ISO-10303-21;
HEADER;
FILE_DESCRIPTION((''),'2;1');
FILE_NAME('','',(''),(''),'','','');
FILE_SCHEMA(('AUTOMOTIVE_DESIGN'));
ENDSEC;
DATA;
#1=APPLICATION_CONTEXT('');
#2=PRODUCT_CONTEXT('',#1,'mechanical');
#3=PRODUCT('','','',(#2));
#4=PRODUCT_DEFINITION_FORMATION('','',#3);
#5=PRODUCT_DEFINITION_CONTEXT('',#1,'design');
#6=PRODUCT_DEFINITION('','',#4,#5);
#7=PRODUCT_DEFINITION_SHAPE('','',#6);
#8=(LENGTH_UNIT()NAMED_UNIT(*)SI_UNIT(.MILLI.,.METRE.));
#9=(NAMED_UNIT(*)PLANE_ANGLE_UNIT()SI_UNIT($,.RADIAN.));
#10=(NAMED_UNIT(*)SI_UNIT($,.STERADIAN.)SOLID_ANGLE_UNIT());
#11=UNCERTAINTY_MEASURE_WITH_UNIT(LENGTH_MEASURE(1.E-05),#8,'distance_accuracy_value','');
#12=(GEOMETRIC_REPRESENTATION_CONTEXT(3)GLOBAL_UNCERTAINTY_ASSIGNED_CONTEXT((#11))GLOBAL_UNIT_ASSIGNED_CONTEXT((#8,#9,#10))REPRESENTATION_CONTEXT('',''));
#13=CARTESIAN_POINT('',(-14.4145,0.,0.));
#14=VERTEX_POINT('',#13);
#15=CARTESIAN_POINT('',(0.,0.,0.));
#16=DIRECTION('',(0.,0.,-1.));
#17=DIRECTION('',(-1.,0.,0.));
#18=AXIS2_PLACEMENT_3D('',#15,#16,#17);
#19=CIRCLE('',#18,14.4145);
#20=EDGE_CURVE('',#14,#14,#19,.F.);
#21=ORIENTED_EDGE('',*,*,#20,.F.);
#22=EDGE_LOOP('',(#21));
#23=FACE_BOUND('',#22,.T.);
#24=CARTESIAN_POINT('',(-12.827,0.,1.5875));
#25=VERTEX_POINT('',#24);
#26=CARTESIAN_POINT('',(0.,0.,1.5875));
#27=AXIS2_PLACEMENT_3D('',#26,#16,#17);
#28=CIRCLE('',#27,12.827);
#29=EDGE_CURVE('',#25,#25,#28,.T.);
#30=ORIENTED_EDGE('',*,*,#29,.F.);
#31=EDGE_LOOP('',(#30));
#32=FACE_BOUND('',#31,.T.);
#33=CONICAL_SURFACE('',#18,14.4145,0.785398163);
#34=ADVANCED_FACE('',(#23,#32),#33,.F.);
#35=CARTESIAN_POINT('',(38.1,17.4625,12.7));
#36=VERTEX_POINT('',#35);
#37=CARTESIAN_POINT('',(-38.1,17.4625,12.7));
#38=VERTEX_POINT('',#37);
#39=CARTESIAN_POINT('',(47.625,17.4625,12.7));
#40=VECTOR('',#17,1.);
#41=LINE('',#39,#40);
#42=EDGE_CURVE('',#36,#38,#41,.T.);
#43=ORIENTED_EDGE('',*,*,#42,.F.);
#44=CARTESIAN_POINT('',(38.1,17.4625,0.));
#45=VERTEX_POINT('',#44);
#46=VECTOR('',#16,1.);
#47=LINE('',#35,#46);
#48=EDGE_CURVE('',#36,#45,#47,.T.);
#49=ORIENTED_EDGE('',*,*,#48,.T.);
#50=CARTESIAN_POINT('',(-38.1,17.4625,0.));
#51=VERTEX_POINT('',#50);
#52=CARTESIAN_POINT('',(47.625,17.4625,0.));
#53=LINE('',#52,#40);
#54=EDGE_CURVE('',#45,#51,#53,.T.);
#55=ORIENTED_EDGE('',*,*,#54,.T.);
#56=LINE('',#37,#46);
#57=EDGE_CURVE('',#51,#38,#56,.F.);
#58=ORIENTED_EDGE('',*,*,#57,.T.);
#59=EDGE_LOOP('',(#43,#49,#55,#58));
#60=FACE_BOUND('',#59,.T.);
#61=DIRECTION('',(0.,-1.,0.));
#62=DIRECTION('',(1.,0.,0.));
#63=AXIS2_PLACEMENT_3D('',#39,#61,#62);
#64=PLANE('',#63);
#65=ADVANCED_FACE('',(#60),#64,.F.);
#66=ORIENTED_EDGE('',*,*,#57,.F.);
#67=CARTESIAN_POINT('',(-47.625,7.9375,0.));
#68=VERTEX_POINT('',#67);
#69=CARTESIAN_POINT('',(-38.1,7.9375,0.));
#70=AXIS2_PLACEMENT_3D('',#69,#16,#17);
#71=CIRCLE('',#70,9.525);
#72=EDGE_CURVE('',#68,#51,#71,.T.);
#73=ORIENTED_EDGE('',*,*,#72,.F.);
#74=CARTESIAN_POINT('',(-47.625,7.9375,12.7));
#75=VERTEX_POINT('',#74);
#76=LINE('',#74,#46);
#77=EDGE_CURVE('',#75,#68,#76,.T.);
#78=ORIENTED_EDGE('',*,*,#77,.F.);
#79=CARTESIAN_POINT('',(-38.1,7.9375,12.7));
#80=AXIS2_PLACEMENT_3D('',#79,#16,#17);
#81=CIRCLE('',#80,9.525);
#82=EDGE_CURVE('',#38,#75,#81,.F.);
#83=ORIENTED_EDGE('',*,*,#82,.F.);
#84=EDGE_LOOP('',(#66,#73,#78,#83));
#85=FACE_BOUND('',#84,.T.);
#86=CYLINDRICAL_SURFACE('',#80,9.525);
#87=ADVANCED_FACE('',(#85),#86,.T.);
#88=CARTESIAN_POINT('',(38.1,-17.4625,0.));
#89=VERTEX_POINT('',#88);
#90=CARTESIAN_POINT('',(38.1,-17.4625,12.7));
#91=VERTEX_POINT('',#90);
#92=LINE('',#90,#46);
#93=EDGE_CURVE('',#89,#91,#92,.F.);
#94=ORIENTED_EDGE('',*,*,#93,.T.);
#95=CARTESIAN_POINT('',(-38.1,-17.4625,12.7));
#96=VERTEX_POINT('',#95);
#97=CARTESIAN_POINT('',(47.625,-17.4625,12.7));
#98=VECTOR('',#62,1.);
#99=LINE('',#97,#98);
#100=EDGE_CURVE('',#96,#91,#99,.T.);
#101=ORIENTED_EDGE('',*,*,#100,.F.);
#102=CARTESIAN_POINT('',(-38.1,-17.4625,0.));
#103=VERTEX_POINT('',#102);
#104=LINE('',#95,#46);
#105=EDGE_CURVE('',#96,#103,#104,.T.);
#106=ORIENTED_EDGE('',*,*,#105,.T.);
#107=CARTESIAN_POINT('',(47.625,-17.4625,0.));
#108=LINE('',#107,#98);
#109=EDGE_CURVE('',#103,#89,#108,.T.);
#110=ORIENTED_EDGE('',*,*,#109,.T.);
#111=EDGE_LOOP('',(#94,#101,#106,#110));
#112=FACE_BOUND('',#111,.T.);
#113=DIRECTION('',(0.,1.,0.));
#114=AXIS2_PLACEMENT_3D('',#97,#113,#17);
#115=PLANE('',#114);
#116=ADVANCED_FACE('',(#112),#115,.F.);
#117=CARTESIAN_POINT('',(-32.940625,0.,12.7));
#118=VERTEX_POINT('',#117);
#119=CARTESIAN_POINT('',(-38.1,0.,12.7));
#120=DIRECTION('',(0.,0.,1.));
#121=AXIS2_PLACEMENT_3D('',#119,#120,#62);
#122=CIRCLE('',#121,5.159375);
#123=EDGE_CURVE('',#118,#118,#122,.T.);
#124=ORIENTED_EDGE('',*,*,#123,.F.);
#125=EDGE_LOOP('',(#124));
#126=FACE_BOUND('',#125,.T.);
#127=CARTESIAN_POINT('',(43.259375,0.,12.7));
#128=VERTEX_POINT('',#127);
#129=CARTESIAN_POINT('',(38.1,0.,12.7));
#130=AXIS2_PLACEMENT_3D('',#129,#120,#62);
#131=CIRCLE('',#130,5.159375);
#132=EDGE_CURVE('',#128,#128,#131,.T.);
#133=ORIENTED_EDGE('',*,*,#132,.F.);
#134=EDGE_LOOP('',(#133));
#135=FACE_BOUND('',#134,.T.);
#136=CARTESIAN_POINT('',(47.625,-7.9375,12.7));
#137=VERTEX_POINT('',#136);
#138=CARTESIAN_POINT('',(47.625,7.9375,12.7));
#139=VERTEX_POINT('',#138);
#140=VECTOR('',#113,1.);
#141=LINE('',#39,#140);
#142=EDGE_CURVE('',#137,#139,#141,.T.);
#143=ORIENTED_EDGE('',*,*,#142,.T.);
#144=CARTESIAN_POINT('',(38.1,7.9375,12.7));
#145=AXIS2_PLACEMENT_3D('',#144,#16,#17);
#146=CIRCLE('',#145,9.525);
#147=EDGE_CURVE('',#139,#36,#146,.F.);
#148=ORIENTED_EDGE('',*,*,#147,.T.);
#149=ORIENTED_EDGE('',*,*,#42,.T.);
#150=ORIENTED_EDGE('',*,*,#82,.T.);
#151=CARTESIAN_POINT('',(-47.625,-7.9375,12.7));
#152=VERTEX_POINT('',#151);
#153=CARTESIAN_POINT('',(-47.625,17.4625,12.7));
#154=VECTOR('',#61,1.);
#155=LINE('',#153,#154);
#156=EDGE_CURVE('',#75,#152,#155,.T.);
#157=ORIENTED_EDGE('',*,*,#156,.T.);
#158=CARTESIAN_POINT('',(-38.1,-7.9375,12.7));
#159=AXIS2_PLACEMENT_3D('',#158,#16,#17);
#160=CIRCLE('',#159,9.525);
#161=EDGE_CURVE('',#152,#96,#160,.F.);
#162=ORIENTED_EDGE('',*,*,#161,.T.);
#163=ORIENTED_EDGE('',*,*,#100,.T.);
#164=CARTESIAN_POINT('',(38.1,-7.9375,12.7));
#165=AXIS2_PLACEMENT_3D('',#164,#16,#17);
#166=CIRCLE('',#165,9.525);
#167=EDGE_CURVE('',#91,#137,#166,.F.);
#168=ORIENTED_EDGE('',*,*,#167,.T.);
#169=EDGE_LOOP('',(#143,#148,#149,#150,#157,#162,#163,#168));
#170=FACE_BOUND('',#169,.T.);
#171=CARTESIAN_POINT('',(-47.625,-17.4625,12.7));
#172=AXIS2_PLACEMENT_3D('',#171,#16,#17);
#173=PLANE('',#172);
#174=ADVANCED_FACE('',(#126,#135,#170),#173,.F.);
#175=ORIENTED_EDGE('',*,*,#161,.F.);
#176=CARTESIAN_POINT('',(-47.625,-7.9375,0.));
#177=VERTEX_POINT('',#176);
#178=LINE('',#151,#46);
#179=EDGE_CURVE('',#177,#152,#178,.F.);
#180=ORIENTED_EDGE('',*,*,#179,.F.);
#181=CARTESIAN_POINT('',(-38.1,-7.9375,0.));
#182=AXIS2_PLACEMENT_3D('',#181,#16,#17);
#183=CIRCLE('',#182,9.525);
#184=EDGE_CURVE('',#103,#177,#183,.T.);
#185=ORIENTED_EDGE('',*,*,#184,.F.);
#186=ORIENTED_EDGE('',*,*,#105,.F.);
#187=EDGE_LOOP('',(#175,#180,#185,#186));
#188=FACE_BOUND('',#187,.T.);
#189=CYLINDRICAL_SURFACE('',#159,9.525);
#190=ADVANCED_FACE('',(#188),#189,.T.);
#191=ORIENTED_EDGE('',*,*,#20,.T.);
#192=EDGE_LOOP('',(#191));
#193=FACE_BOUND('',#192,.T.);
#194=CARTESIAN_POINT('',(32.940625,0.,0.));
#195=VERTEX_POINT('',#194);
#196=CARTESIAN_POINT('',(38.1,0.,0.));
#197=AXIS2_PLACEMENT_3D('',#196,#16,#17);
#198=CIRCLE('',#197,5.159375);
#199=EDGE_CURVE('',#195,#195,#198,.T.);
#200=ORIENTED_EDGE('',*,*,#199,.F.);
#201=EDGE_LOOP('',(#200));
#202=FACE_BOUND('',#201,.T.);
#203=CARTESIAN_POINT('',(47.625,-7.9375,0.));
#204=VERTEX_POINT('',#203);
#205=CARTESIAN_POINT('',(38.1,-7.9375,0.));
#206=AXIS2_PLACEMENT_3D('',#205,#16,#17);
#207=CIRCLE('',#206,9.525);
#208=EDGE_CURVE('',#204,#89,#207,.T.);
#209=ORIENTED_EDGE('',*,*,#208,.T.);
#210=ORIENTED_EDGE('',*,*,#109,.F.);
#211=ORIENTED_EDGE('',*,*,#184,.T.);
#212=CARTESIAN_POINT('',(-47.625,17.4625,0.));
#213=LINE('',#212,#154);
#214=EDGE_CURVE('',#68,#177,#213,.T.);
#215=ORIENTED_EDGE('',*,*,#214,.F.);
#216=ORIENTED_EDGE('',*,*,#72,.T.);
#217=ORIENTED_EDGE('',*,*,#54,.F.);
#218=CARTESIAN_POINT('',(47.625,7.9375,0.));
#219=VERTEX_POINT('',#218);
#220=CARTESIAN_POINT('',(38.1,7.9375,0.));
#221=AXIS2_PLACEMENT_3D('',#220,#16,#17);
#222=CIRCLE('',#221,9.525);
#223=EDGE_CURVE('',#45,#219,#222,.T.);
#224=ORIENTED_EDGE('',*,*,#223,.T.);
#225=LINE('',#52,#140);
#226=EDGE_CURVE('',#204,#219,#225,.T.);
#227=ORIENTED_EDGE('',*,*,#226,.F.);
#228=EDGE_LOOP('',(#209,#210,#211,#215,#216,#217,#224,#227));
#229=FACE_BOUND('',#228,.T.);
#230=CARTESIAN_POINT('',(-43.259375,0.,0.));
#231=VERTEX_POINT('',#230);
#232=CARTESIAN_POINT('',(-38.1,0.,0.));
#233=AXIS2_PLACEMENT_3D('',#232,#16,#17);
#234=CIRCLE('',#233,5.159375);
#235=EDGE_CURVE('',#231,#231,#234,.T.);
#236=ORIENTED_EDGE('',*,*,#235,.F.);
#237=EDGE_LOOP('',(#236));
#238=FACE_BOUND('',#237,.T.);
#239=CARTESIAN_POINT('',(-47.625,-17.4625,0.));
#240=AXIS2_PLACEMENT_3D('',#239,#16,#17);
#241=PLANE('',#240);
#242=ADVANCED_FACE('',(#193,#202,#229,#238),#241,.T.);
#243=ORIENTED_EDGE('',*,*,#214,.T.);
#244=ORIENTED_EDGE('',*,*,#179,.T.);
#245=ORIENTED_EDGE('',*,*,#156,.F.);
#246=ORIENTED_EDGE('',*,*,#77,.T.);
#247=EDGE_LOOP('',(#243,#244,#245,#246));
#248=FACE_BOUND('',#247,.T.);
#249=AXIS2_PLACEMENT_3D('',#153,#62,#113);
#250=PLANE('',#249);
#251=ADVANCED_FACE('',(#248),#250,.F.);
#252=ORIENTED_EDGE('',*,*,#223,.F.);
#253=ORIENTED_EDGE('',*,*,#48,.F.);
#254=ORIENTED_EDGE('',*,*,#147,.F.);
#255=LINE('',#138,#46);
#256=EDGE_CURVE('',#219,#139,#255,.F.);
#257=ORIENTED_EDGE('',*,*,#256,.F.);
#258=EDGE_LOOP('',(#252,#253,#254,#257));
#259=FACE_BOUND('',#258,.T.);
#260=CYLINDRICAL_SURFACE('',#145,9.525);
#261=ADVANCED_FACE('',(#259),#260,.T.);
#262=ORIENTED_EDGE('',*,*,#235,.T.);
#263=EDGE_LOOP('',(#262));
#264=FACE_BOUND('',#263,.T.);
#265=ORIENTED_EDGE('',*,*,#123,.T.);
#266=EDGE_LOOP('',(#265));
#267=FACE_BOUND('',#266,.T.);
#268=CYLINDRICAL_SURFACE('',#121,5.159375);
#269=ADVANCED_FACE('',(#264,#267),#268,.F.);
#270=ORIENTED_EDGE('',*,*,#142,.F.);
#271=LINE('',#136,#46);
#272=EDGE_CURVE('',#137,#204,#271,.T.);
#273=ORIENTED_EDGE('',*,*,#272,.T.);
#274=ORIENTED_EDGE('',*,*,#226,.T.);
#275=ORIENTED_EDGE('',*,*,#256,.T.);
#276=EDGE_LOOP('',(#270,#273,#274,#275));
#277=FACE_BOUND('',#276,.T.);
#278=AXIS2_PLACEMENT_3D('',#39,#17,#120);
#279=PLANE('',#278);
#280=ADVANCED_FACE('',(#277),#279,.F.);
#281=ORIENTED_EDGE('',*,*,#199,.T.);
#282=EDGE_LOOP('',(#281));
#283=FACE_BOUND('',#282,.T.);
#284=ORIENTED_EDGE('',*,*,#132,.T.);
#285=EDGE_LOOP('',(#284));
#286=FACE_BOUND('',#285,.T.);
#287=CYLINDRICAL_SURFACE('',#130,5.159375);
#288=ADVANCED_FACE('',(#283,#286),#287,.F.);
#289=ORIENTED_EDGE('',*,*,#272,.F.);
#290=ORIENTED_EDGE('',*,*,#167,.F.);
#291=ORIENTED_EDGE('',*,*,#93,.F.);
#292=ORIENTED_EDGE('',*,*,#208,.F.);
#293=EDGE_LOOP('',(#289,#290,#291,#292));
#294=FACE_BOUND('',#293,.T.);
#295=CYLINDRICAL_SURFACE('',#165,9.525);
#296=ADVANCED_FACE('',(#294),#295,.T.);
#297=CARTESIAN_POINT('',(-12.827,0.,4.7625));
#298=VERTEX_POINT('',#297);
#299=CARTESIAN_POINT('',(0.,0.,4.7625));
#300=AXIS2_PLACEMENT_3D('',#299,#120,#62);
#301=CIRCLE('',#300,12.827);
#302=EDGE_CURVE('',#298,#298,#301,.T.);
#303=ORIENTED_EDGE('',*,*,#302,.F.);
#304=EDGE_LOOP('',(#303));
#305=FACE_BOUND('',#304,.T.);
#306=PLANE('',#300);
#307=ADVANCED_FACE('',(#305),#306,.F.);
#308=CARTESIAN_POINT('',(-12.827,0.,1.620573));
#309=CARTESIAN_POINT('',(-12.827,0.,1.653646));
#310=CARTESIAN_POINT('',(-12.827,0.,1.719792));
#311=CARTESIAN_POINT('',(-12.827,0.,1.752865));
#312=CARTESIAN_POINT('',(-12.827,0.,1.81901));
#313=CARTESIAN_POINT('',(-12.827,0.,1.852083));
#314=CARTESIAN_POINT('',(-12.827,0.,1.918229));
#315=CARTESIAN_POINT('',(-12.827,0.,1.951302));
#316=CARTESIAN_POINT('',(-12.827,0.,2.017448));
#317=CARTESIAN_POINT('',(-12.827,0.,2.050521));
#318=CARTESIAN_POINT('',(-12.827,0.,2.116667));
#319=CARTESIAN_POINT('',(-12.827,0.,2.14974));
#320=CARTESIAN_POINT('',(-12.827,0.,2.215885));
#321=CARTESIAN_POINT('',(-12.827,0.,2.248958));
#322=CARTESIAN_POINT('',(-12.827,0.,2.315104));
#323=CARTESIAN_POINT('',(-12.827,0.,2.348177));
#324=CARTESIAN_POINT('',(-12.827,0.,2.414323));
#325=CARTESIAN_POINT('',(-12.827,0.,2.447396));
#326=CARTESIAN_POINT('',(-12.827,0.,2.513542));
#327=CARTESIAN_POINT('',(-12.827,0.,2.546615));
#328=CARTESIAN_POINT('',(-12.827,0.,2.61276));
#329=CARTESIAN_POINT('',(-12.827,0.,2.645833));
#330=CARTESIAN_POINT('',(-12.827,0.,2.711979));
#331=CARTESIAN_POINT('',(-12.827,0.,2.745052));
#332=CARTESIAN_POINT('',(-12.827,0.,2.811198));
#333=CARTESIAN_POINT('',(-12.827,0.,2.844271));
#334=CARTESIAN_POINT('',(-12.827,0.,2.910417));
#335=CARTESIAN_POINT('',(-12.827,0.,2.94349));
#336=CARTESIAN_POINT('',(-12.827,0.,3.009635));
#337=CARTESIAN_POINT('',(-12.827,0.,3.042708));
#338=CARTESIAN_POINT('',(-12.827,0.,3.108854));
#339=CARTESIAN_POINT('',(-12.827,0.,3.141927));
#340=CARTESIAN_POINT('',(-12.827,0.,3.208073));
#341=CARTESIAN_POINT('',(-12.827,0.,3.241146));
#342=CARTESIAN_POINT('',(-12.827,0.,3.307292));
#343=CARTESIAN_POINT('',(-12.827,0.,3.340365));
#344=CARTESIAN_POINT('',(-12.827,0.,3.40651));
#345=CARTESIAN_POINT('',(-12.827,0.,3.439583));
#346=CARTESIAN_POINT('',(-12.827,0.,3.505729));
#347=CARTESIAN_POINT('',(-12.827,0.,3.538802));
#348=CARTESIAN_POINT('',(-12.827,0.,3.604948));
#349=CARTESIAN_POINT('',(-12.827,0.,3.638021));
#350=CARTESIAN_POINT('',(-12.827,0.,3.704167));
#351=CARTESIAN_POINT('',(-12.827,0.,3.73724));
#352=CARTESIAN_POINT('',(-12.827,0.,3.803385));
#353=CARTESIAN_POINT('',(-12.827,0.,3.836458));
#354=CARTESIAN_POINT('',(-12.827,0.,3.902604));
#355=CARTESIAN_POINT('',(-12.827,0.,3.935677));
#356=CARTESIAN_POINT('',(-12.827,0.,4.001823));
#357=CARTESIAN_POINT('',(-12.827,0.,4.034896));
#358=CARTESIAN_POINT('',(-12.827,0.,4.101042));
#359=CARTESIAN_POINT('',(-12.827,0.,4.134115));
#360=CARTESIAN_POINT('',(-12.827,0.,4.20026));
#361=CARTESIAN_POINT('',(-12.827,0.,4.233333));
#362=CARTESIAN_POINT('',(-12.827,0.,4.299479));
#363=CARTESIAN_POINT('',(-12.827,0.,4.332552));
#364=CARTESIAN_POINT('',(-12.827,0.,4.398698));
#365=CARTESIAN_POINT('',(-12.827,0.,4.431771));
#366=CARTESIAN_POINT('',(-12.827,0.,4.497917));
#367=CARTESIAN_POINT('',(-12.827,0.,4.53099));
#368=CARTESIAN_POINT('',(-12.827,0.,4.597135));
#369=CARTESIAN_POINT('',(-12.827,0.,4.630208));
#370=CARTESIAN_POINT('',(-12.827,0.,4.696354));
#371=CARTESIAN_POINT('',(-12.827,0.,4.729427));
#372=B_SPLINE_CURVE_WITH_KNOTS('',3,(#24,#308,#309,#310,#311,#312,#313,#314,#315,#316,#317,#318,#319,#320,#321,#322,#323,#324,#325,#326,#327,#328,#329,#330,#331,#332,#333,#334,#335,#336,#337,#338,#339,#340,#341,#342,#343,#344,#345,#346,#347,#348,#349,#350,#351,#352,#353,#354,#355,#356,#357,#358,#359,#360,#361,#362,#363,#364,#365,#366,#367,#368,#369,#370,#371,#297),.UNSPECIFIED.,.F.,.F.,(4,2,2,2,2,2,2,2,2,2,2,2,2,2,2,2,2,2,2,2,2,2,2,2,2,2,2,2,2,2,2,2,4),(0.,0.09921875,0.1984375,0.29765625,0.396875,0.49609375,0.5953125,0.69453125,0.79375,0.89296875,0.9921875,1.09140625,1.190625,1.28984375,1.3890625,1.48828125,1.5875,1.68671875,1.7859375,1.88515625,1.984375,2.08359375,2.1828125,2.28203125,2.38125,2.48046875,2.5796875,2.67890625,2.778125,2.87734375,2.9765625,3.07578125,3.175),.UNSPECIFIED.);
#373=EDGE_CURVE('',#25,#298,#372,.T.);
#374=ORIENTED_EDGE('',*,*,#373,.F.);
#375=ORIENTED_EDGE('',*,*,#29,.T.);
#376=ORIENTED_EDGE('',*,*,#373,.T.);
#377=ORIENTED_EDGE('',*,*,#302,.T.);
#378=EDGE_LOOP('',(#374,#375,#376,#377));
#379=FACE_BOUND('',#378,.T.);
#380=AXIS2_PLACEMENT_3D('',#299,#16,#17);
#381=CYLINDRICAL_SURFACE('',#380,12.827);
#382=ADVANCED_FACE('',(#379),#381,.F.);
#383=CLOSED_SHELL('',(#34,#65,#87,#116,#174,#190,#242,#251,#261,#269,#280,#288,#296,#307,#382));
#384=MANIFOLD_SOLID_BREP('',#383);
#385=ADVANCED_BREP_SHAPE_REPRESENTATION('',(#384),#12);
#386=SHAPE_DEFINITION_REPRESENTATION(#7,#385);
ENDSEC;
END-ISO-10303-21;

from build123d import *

# Parameters (mm, degrees)
SKETCH1_W                        = 95.25
SKETCH1_H                        = 34.925
BASE_FLANGE1_DEPTH               = 12.7
SKETCH2_R                        = 12.827
CUT_EXTRUDE1_DEPTH               = 4.7625
F_13_32_0_40625_DIAMETER_HOLE1_D = 10.31875
CHAMFER1_SIZE                    = 1.5875
FILLET1_R                        = 9.525


# Sheet-metal steps are written as plain solids
with BuildPart() as part:
    # Sketch1 → Base-Flange1 (new body)
    with BuildSketch(Plane.XY):
        Rectangle(SKETCH1_W, SKETCH1_H)
    extrude(amount=BASE_FLANGE1_DEPTH)

    # Sketch2 → Cut-Extrude1 (cut)
    with BuildSketch(Plane.XY):
        with Locations(Location((0, 0, 0), (0, 0, 180))):
            Circle(SKETCH2_R)
    extrude(amount=CUT_EXTRUDE1_DEPTH, mode=Mode.SUBTRACT)

    # 13/32 (0.40625) Diameter Hole1 (through all)
    with Locations(Plane.XY.offset(12.7)):
        with Locations((38.1, 0), (-38.1, 0)):
            Hole(F_13_32_0_40625_DIAMETER_HOLE1_D / 2)

    # Chamfer1
    chamfer1_edges = [part.edges().sort_by_distance(p)[0] for p in [
        (12.827, 0, 0),
    ]]
    chamfer(chamfer1_edges, length=CHAMFER1_SIZE)

    # Fillet1
    fillet1_edges = [part.edges().sort_by_distance(p)[0] for p in [
        (-47.625, 17.4625, 6.35),
        (47.625, 17.4625, 6.35),
        (47.625, -17.4625, 6.35),
        (-47.625, -17.4625, 6.35),
    ]]
    fillet(fillet1_edges, radius=FILLET1_R)


solid = part.part
